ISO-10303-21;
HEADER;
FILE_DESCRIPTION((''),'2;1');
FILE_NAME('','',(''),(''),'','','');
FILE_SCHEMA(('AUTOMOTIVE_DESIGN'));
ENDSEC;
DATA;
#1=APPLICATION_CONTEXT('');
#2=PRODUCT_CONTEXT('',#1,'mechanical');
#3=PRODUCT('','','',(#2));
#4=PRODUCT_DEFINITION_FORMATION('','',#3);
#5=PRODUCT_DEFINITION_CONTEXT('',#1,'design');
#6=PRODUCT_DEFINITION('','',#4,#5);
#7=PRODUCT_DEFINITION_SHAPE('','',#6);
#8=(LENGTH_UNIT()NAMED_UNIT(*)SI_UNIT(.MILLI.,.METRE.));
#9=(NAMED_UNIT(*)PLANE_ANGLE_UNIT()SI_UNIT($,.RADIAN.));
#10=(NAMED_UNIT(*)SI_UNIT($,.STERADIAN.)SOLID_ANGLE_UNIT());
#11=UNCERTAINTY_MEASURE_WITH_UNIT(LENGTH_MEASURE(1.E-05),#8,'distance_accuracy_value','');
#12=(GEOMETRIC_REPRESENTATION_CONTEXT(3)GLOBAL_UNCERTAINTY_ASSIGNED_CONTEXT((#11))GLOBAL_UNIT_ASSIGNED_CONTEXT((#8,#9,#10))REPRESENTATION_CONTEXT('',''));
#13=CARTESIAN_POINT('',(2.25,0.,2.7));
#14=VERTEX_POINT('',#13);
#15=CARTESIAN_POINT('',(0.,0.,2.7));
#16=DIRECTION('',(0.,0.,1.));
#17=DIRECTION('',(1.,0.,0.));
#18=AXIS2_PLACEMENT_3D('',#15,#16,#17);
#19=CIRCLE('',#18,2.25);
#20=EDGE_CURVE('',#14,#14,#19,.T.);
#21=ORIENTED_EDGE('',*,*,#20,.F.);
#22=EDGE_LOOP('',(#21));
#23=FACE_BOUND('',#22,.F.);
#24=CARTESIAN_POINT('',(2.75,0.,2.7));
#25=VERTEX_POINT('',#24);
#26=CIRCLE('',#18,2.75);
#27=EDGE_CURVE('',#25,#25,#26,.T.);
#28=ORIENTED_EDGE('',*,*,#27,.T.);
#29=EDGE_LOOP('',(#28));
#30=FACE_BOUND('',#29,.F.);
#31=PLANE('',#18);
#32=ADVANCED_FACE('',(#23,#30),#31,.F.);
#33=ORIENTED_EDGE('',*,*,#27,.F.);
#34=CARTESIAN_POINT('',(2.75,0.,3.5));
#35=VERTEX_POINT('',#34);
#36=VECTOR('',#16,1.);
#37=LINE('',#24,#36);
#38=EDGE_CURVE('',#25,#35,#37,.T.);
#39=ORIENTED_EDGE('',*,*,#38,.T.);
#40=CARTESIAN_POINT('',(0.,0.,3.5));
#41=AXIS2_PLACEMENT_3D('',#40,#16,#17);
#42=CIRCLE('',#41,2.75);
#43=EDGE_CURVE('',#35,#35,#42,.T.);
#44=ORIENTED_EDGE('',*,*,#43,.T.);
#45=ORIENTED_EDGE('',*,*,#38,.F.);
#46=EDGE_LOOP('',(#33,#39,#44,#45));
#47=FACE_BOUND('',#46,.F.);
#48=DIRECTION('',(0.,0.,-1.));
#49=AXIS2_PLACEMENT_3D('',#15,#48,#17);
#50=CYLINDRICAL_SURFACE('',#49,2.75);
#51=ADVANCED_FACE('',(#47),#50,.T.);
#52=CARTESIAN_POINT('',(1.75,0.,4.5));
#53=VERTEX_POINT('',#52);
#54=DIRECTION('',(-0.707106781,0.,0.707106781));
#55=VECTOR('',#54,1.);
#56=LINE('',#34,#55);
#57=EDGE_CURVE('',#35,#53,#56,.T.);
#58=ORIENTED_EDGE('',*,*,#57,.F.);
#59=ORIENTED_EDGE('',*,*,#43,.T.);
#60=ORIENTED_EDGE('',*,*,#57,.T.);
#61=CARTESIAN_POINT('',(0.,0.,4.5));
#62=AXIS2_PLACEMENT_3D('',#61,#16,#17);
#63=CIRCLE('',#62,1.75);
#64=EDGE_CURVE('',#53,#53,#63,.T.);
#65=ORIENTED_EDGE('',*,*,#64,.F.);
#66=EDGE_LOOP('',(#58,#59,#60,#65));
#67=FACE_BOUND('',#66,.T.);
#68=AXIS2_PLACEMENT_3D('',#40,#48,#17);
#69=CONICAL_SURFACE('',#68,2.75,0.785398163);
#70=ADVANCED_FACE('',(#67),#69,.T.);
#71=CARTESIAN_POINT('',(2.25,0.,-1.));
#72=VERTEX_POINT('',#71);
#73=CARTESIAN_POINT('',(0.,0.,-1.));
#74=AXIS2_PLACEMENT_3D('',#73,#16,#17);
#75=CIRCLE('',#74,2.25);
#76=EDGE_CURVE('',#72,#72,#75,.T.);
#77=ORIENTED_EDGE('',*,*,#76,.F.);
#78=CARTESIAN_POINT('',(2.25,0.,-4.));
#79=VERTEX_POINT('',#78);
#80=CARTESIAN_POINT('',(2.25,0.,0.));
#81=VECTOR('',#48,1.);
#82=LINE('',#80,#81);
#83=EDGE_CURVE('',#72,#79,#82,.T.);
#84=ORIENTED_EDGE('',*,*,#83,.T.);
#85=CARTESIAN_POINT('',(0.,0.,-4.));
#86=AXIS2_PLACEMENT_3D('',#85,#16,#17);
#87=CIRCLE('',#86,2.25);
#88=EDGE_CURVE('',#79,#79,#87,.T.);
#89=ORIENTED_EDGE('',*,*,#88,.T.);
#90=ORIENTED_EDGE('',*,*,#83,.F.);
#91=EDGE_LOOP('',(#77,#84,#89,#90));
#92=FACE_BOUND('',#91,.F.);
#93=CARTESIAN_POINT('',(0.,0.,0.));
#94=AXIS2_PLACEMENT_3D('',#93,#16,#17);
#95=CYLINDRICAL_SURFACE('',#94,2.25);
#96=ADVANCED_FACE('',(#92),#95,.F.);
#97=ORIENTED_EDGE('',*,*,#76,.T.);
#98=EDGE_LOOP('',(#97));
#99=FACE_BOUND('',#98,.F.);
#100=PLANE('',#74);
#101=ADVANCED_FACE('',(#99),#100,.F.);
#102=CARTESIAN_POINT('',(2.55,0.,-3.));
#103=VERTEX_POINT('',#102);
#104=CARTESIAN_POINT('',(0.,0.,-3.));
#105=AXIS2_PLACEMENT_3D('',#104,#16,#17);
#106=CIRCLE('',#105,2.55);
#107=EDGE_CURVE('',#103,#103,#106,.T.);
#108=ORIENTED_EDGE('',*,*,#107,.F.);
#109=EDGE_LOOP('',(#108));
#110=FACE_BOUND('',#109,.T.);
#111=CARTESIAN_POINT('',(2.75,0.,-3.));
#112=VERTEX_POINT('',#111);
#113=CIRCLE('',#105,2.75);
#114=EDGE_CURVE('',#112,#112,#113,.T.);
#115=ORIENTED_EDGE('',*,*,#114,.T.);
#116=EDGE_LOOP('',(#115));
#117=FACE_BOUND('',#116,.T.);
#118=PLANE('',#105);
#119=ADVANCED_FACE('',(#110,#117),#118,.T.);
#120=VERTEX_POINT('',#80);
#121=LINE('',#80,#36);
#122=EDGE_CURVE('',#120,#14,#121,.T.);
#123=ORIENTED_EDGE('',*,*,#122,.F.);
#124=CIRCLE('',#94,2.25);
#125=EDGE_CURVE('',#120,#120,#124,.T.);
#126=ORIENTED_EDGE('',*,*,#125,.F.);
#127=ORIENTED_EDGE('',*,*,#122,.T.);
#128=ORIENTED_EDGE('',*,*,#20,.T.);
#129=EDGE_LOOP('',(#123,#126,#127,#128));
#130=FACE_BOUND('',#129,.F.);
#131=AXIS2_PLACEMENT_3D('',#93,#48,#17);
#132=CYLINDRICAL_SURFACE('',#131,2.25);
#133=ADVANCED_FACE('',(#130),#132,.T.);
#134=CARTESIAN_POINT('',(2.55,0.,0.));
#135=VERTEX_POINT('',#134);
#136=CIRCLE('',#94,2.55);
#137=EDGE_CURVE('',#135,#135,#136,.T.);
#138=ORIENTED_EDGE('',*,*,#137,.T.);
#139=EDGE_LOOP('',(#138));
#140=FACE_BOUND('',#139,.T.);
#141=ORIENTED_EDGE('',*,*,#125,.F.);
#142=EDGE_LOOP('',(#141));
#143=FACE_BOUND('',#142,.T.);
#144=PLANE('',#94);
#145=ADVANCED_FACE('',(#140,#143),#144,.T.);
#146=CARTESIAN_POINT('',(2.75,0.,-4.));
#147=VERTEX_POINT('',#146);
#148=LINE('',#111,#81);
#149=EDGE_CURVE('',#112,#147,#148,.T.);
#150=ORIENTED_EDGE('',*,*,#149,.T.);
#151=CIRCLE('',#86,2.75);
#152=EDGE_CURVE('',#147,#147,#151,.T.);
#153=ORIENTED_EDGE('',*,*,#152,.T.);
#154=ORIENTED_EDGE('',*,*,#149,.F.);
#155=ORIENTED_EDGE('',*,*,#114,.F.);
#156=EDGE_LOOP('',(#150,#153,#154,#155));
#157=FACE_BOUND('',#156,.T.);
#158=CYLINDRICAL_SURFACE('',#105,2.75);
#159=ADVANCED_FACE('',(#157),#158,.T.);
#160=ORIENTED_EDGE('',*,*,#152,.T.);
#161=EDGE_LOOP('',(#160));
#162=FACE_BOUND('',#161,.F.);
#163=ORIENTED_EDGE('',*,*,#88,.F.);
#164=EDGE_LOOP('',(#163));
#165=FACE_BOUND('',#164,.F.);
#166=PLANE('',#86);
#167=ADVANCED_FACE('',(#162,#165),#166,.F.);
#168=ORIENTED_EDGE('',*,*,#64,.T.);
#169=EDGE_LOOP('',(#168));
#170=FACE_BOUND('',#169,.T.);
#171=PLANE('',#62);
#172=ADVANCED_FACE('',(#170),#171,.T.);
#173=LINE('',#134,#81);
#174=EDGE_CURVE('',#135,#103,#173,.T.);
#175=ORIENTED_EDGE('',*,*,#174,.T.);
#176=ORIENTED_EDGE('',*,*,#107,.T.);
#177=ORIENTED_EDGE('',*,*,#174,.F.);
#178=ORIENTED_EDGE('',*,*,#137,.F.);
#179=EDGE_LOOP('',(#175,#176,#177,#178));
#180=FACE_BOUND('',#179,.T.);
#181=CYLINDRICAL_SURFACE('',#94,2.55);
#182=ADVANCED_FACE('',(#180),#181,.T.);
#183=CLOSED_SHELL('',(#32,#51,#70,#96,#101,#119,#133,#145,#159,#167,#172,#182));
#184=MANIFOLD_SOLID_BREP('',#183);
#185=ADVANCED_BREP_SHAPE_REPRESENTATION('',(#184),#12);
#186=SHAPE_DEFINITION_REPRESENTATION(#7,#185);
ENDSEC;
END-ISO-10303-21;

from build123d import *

# Parameters (mm, degrees)
F0_R          = 2.55
F0_R_2        = 2.25
F1_DEPTH      = 4
F2_START      = -3
F0_R_3        = 2.75
F2_DEPTH      = 1
F3_DEPTH      = 4.5
F3_DEPTH_BACK = 1
F4_START      = 2.7
F4_DEPTH      = 1.8
F5_SIZE       = 1


with BuildPart() as f1:
    # F0 (on Top) → F1 (new body)
    with BuildSketch(Plane.XY):
        Circle(F0_R)
        Circle(F0_R_2, mode=Mode.SUBTRACT)
    extrude(amount=-F1_DEPTH)

    # F0 (on Top) → F2 (join)
    with BuildSketch(Plane.XY.offset(F2_START)):
        Circle(F0_R_3)
        Circle(F0_R, mode=Mode.SUBTRACT)
    extrude(amount=-F2_DEPTH)

    # F0 (on Top) → F3 (join, two sides)
    with BuildSketch(Plane.XY) as f3_sk:
        Circle(F0_R_2)
    extrude(amount=F3_DEPTH)
    extrude(f3_sk.sketch, amount=-F3_DEPTH_BACK)

    # F0 (on Top) → F4 (join)
    with BuildSketch(Plane.XY.offset(F4_START)):
        Circle(F0_R_3)
        Circle(F0_R, mode=Mode.SUBTRACT)
        Circle(F0_R)
        Circle(F0_R_2, mode=Mode.SUBTRACT)
    extrude(amount=F4_DEPTH)

    # F5
    f5_edges = [f1.edges().sort_by_distance(p)[0] for p in [
        (-2.75, 0, 4.5),
    ]]
    chamfer(f5_edges, length=F5_SIZE)


solid = f1.part
